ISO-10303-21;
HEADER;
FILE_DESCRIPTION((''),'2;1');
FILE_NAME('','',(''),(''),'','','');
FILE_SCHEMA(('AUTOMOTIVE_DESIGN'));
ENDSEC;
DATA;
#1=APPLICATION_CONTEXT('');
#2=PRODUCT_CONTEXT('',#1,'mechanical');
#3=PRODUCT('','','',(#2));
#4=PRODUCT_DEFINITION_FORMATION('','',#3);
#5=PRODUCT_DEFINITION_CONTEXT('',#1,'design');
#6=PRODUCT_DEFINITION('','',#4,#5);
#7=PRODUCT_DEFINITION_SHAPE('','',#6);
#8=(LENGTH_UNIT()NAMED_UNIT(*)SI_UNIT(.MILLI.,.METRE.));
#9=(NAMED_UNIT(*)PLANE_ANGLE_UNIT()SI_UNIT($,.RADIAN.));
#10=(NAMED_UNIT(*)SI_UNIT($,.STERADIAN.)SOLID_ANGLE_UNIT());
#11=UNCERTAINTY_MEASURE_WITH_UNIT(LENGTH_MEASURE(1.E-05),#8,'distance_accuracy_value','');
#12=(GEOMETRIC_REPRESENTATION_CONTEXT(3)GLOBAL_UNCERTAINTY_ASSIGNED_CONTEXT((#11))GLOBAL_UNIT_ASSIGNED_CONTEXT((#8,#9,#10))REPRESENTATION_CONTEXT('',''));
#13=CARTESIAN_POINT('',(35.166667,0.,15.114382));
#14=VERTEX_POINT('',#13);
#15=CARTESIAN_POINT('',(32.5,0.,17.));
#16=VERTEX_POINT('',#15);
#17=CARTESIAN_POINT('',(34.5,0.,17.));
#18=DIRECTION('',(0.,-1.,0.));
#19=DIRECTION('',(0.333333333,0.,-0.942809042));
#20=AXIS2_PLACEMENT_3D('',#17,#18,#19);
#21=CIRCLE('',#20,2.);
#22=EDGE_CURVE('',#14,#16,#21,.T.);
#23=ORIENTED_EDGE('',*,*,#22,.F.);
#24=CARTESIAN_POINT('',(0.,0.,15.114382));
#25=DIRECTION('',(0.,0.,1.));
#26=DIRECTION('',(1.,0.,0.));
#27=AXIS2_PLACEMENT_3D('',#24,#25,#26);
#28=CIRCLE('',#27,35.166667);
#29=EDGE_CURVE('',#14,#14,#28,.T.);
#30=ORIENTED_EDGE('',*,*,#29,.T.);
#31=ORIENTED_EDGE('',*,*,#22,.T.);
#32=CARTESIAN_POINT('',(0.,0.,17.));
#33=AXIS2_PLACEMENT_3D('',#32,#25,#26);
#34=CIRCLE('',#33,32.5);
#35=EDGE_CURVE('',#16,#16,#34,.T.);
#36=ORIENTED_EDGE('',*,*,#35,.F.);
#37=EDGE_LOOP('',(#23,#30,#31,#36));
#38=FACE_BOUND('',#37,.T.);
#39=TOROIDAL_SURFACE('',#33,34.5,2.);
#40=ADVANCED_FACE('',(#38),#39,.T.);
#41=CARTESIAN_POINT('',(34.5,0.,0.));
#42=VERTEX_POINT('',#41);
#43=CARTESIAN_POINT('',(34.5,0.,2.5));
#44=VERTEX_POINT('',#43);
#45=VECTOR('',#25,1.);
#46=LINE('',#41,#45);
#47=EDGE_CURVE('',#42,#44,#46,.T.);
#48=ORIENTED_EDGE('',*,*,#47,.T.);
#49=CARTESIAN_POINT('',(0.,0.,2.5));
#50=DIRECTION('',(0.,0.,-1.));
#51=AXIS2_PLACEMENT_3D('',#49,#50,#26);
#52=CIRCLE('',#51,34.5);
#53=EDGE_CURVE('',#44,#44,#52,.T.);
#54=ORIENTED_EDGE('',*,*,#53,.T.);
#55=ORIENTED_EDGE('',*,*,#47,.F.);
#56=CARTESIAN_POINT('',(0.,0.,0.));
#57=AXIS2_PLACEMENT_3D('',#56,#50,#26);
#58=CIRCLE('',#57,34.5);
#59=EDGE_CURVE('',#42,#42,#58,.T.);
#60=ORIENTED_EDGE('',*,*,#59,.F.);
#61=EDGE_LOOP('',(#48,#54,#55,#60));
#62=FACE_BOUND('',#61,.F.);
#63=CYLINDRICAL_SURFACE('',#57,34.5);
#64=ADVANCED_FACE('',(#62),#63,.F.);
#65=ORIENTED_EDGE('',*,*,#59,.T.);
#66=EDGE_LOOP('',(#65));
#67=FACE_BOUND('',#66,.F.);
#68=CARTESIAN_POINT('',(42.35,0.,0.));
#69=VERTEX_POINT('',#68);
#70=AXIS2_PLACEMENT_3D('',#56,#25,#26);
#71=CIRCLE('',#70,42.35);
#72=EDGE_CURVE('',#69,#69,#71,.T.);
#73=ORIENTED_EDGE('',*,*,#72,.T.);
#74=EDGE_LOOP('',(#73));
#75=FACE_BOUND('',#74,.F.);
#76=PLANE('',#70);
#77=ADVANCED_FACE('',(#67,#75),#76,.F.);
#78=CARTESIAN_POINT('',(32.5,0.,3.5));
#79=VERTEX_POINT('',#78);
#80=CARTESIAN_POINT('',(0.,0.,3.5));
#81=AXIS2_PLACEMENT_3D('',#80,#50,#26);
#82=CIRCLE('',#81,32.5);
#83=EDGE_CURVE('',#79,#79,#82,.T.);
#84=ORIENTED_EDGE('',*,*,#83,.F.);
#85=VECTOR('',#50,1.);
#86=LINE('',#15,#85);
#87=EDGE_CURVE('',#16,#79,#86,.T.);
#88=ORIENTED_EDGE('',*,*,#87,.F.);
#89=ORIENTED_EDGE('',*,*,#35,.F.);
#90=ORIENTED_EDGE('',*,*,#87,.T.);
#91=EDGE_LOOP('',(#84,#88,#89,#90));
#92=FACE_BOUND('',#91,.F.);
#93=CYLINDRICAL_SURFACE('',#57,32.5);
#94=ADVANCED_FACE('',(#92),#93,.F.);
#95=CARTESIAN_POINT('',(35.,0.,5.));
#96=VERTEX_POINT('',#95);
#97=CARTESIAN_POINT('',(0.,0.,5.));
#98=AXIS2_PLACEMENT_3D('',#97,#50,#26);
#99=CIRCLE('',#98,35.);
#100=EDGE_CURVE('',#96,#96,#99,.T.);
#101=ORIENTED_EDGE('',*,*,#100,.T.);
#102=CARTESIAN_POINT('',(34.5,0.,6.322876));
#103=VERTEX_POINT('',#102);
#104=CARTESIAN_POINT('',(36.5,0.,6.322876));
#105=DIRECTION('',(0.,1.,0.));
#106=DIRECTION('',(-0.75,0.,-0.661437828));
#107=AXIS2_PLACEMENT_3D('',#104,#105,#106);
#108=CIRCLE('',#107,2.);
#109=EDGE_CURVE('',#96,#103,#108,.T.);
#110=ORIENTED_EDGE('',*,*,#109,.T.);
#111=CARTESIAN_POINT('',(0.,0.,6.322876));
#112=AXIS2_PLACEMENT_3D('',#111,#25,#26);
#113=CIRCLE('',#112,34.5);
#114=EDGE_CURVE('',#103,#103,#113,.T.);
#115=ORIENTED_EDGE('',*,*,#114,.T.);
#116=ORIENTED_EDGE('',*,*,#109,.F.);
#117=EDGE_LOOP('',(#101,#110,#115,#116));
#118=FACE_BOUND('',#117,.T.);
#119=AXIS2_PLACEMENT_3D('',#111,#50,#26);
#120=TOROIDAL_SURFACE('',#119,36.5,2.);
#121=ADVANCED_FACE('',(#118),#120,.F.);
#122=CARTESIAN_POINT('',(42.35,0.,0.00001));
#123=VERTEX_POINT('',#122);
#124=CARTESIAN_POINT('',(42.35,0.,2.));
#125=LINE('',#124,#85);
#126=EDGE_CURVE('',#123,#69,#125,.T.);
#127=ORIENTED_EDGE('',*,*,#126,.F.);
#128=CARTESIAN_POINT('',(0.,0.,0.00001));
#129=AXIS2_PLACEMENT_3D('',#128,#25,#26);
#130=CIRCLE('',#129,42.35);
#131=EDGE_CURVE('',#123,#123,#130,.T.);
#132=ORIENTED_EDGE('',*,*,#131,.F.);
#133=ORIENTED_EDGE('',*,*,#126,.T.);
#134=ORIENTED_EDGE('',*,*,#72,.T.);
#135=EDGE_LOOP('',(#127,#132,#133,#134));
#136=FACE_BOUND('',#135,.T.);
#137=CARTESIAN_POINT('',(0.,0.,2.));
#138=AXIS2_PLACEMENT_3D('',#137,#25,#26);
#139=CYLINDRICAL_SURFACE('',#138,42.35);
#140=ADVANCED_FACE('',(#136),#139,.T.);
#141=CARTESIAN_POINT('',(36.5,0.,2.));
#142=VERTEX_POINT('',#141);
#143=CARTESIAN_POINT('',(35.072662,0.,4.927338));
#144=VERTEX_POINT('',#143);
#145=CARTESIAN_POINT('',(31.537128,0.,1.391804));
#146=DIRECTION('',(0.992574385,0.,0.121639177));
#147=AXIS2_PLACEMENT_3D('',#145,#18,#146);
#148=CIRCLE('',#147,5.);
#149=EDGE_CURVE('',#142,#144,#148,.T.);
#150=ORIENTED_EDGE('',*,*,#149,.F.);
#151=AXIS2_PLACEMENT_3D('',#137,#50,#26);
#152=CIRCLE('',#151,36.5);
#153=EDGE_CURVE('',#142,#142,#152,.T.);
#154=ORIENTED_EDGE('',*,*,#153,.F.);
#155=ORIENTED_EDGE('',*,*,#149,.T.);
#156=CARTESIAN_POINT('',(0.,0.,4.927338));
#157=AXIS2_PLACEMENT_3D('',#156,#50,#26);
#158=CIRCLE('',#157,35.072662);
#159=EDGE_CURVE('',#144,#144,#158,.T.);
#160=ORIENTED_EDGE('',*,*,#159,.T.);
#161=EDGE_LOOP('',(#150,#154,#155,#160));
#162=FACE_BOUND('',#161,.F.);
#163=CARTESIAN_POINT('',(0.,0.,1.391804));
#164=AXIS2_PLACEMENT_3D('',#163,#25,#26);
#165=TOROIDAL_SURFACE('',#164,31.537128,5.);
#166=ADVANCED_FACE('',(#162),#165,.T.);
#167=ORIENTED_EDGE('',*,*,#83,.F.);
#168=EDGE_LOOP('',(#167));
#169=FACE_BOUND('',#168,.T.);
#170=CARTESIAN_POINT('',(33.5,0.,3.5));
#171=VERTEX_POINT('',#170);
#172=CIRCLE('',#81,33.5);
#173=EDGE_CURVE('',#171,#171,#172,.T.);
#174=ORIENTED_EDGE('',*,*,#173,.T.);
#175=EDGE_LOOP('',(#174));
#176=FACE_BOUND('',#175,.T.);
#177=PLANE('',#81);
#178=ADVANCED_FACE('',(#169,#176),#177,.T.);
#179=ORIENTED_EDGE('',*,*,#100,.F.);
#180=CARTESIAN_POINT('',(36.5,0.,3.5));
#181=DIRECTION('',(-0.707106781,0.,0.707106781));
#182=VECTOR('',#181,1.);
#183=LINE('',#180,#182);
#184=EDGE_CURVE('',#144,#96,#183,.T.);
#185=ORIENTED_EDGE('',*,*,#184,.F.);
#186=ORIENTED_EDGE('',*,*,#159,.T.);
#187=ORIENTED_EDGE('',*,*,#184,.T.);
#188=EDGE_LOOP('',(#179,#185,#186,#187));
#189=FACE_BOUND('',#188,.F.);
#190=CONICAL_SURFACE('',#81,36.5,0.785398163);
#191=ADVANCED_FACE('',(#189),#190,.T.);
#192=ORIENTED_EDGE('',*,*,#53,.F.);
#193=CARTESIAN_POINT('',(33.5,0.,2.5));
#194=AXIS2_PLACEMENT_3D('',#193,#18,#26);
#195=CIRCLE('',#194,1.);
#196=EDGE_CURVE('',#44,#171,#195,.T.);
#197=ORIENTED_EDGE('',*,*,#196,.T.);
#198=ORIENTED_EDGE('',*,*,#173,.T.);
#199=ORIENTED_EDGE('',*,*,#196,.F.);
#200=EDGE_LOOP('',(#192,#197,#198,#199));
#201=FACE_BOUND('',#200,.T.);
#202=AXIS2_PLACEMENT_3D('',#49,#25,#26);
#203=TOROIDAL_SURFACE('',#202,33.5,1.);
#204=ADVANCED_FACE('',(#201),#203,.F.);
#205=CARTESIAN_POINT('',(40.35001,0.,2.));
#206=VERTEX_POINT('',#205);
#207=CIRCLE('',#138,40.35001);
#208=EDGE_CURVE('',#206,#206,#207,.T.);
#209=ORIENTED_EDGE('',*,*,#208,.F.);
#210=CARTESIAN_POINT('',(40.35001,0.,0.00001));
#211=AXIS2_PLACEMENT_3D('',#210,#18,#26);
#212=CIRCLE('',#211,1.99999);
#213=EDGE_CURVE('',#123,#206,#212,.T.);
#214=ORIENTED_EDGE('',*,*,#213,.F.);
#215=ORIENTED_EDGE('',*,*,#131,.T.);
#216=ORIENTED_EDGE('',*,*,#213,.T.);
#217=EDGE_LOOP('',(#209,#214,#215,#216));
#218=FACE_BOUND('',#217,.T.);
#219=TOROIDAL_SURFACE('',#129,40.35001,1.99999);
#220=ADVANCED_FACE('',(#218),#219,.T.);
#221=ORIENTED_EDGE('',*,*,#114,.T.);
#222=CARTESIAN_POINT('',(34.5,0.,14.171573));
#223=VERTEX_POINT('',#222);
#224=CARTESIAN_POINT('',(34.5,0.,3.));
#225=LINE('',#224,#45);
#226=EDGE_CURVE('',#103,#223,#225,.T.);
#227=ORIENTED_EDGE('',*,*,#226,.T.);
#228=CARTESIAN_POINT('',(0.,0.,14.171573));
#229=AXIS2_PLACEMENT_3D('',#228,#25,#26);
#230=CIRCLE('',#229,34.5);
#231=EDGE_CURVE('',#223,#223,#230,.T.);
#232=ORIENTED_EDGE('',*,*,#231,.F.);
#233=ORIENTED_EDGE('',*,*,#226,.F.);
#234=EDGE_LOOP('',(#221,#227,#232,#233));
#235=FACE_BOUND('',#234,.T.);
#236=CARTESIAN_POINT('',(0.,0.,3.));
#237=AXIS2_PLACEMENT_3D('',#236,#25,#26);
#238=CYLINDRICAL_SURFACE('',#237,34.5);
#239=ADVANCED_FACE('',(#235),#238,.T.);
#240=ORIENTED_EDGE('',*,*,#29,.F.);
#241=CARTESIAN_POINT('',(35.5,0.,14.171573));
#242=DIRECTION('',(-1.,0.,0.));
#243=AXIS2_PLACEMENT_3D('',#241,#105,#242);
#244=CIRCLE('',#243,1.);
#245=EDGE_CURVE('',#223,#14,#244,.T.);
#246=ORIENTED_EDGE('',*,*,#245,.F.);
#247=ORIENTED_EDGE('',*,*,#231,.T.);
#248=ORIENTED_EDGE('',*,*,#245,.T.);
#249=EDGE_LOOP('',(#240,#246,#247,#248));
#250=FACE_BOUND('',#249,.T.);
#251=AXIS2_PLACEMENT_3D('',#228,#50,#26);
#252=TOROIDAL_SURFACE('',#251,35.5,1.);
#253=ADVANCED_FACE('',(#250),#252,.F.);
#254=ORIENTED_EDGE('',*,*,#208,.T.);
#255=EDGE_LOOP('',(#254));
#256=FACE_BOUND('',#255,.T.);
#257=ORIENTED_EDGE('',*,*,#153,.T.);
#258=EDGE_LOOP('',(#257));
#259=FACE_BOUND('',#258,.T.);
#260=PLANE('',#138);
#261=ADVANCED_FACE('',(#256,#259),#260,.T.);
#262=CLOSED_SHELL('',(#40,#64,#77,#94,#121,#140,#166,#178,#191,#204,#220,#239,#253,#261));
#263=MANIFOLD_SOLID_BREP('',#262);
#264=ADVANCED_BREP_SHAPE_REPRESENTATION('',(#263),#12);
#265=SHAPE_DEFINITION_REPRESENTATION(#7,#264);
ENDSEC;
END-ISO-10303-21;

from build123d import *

# Parameters (mm, degrees)
F0_R      = 42
F0_R_2    = 36.5
F1_DEPTH  = 2
F4_R      = 42
F5_DEPTH  = 1
F6_R      = 34.5
F6_R_2    = 32.5
F7_DEPTH  = 3
F8_R      = 42.35
F8_R_2    = 42
F9_DEPTH  = 2
F10_R     = 1.99999
F11_R     = 32.5
F12_DEPTH = 25
F13_R     = 36.5
F13_R_2   = 32.5
F14_DEPTH = 5
F15_R     = 34.5
F16_DEPTH = 3.5
F17_R     = 1
F18_SIZE  = 1.5


# Not quite as in the source:
# - a fillet or chamfer that OpenCascade refuses, or shapes differently, is made with other operations: its cross-section is extruded or revolved along the edge and cut away or added
# - a fillet or chamfer is up to 0.001 mm smaller than in the source, because OpenCascade refuses the exact size


with BuildPart() as f1:
    # F0 (on Top) → F1 (new body)
    with BuildSketch(Plane.XY):
        Circle(F0_R)
        Circle(F0_R_2, mode=Mode.SUBTRACT)
    extrude(amount=F1_DEPTH)

    # F2 (on Front) → F3 (revolve)
    with BuildSketch(Plane.XZ):
        with BuildLine():
            Line((36.5, 0), (36.5, 2))
            Line((36.5, 2), (35.5, 2))
            ThreePointArc((35.5, 2), (34.7928932188, 2.2928932188), (34.5, 3))
            Line((34.5, 3), (34.5, 14.1715728753))
            ThreePointArc((34.5, 14.1715728753), (34.6835034191, 14.7489231444), (35.1666666667, 15.1143819168))
            ThreePointArc((35.1666666667, 15.1143819168), (35.6547005384, 18.6329931619), (32.5, 17))
            Line((32.5, 17), (32.5, 2))
            ThreePointArc((32.5, 2), (33.0857864376, 0.5857864376), (34.5, 0))
            Line((34.5, 0), (36.5, 0))
        make_face()
    revolve(axis=Axis((0, 0, 63.5549128056), (0, 0, 1)))

    # F4 (on face) → F5 (join)
    with BuildSketch(Plane(origin=(0, 0, 0), x_dir=(1, 0, 0), z_dir=(0, 0, -1))):
        Circle(F4_R)
    extrude(amount=-F5_DEPTH)

    # F6 (on face) → F7 (join)
    with BuildSketch(Plane.XY.offset(1)):
        Circle(F6_R)
        Circle(F6_R_2, mode=Mode.SUBTRACT)
    extrude(amount=F7_DEPTH)

    # F8 (on face) → F9 (join)
    with BuildSketch(Plane.XY.offset(2)):
        Circle(F8_R)
        Circle(F8_R_2, mode=Mode.SUBTRACT)
    extrude(amount=-F9_DEPTH)

    # F10 (radius 2 in the source; OpenCascade refuses exactly that, so slightly less here)
    f10_edges = [f1.edges().sort_by_distance(p)[0] for p in [
        (-42.35, 0, 2),
    ]]
    fillet(f10_edges, radius=F10_R)

    # F11 (on face) → F12 (cut)
    with BuildSketch(Plane(origin=(0, 0, 0), x_dir=(1, 0, 0), z_dir=(0, 0, -1))):
        Circle(F11_R)
    extrude(amount=-F12_DEPTH, mode=Mode.SUBTRACT)

    # F13 (on face) → F14 (join)
    with BuildSketch(Plane(origin=(0, 0, 0), x_dir=(1, 0, 0), z_dir=(0, 0, -1))):
        Circle(F13_R)
        Circle(F13_R_2, mode=Mode.SUBTRACT)
    extrude(amount=-F14_DEPTH)

    # F15 (on face) → F16 (cut)
    with BuildSketch(Plane(origin=(0, 0, 0), x_dir=(1, 0, 0), z_dir=(0, 0, -1))):
        Circle(F15_R)
    extrude(amount=-F16_DEPTH, mode=Mode.SUBTRACT)

    # F17
    f17_edges = [f1.edges().sort_by_distance(p)[0] for p in [
        (-34.5, 0, 3.5),
    ]]
    fillet(f17_edges, radius=F17_R)

    # F18
    f18_edges = [f1.edges().sort_by_distance(p)[0] for p in [
        (-36.5, 0, 5),
    ]]
    chamfer(f18_edges, length=F18_SIZE)

    # F19: fillet of radius 2 on 1 edges, made by hand

    # F19_s1 → F19_t2 (revolve)
    with BuildSketch(Plane.XZ):
        with BuildLine():
            ThreePointArc((35, 5), (34.6291713066, 5.6157688743), (34.5, 6.3228756555))
            Line((34.5, 6.3228756555), (34.5, 5))
            Line((34.5, 5), (35, 5))
        make_face()
    revolve(axis=Axis((0, 0, 5), (0, 0, 1)))

    # F20: fillet of radius 5 on 1 edges, made by hand

    # F20_s1 → F20_t2 (revolve, cut)
    with BuildSketch(Plane.XZ):
        with BuildLine():
            ThreePointArc((36.5, 2), (36.0313524106, 3.5831387774), (35.0726619787, 4.9273380213))
            Line((35.0726619787, 4.9273380213), (36.5, 3.5))
            Line((36.5, 3.5), (36.5, 2))
        make_face()
    revolve(axis=Axis((0, 0, 3.5), (0, 0, -1)), mode=Mode.SUBTRACT)


solid = f1.part
